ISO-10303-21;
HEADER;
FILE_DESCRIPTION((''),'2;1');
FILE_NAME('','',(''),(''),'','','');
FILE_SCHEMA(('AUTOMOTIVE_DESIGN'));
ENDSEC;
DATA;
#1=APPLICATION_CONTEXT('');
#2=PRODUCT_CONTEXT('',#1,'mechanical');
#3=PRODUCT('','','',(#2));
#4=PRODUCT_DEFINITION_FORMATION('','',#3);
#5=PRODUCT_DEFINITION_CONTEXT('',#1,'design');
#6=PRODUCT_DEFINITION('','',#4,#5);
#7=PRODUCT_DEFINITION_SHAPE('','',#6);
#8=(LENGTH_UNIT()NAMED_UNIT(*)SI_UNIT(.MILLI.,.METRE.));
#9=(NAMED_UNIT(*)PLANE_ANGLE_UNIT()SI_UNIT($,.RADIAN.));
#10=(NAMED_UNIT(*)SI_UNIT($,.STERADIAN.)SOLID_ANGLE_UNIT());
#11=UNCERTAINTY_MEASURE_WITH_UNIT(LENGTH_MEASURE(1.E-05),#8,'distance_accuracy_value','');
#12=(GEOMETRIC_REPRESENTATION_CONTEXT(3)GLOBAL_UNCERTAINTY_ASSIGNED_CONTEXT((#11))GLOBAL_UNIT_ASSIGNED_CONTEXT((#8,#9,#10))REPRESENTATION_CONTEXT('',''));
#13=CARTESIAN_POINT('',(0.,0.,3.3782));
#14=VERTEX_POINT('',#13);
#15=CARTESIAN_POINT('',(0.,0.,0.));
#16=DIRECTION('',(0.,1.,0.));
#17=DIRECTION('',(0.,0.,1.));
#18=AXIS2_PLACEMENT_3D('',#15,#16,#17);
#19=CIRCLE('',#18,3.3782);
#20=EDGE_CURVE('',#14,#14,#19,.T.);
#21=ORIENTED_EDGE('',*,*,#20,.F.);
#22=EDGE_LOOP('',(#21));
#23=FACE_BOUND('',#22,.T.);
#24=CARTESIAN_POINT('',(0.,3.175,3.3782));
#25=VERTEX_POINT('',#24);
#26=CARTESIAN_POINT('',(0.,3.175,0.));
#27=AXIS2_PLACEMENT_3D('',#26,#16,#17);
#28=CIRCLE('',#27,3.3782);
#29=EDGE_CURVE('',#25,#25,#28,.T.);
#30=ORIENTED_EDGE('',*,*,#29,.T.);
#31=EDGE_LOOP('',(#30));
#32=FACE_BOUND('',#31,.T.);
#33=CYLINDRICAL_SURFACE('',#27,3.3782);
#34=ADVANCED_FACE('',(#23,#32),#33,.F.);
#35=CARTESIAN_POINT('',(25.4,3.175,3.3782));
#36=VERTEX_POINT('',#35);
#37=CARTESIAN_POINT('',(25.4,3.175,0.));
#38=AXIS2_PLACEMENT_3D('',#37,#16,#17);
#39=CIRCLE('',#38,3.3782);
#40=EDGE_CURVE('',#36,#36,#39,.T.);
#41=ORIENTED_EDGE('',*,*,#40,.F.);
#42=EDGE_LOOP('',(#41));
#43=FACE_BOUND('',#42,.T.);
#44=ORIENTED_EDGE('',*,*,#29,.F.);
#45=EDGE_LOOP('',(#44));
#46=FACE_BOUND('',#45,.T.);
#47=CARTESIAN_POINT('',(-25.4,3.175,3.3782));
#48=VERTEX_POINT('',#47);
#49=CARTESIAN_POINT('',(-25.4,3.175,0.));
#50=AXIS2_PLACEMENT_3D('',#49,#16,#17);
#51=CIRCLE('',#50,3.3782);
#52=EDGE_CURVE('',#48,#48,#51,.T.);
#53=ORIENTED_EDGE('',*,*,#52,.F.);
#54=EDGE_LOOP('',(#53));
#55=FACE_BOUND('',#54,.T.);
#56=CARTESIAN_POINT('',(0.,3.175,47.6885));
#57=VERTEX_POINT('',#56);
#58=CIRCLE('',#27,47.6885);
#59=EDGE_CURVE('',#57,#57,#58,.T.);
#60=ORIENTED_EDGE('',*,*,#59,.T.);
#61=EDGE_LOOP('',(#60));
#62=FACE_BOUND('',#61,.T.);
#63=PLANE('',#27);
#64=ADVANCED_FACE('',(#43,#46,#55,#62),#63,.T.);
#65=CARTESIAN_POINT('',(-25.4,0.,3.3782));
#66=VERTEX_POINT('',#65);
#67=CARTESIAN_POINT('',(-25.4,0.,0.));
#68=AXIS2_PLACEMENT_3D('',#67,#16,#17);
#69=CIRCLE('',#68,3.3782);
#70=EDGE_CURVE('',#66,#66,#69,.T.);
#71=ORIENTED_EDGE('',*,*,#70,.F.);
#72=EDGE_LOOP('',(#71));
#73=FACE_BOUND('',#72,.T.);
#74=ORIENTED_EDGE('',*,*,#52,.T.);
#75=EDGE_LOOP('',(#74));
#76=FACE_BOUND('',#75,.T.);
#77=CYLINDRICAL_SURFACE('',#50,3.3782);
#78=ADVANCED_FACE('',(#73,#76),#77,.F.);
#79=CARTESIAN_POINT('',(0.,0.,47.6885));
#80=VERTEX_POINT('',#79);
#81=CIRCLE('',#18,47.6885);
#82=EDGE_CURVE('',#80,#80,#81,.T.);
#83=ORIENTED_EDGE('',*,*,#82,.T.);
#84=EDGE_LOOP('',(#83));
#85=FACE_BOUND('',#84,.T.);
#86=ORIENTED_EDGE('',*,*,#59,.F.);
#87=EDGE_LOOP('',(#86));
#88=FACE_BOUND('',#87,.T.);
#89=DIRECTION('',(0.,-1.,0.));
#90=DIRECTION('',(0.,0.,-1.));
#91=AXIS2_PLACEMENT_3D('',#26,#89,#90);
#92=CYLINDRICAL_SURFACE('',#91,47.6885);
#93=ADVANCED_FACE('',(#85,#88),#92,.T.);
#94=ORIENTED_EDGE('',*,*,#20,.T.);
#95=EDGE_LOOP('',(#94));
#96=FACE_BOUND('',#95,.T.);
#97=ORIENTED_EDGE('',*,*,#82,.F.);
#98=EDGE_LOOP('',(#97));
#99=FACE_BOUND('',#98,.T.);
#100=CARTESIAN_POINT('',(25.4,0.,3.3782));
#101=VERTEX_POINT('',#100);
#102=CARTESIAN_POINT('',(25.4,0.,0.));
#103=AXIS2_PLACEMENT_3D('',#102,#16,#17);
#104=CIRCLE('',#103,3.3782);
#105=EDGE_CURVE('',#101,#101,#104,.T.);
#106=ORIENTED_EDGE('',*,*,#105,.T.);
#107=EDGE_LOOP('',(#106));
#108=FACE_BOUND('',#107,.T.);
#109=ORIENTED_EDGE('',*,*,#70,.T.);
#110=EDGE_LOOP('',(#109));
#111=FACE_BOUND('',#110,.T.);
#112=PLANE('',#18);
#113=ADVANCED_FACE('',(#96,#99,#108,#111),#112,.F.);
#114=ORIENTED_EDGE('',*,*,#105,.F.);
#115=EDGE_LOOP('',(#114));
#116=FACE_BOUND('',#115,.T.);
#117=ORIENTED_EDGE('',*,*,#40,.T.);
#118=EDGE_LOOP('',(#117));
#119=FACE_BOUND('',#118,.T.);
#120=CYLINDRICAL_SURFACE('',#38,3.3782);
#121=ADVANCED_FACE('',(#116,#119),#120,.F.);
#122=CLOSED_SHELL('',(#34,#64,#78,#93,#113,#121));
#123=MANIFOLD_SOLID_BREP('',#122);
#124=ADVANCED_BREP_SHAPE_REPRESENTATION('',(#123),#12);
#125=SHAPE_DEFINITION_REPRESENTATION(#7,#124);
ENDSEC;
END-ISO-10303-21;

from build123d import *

# Parameters (mm, degrees)
SKETCH1_R                       = 47.6885
BOSS_EXTRUDE1_DEPTH             = 3.175
F_1_4_CLEARANCE_HOLE1_OUTLINE_R = 3.3782
F_1_4_CLEARANCE_HOLE1_DEPTH     = 3.175


# Read off the part's stored shape, not the designer's step: 1/4 Clearance Hole1
with BuildPart() as part:
    # Sketch1 → Boss-Extrude1 (new body)
    with BuildSketch(Plane(origin=(0, 0, 0), x_dir=(1, 0, 0), z_dir=(0, 1, 0))):
        with Locations(Location((0, 0, 0), (0, 0, 270))):
            Circle(SKETCH1_R)
    extrude(amount=BOSS_EXTRUDE1_DEPTH)

    # 1/4 Clearance Hole1 outline → 1/4 Clearance Hole1 (cut)
    with BuildSketch(Plane(origin=(0, 0, 0), x_dir=(1, 0, 0), z_dir=(0, 1, 0))):
        Circle(F_1_4_CLEARANCE_HOLE1_OUTLINE_R)
        with Locations((25.4, 0)):
            Circle(F_1_4_CLEARANCE_HOLE1_OUTLINE_R)
        with Locations((-25.4, 0)):
            Circle(F_1_4_CLEARANCE_HOLE1_OUTLINE_R)
    extrude(amount=F_1_4_CLEARANCE_HOLE1_DEPTH, mode=Mode.SUBTRACT)


solid = part.part
